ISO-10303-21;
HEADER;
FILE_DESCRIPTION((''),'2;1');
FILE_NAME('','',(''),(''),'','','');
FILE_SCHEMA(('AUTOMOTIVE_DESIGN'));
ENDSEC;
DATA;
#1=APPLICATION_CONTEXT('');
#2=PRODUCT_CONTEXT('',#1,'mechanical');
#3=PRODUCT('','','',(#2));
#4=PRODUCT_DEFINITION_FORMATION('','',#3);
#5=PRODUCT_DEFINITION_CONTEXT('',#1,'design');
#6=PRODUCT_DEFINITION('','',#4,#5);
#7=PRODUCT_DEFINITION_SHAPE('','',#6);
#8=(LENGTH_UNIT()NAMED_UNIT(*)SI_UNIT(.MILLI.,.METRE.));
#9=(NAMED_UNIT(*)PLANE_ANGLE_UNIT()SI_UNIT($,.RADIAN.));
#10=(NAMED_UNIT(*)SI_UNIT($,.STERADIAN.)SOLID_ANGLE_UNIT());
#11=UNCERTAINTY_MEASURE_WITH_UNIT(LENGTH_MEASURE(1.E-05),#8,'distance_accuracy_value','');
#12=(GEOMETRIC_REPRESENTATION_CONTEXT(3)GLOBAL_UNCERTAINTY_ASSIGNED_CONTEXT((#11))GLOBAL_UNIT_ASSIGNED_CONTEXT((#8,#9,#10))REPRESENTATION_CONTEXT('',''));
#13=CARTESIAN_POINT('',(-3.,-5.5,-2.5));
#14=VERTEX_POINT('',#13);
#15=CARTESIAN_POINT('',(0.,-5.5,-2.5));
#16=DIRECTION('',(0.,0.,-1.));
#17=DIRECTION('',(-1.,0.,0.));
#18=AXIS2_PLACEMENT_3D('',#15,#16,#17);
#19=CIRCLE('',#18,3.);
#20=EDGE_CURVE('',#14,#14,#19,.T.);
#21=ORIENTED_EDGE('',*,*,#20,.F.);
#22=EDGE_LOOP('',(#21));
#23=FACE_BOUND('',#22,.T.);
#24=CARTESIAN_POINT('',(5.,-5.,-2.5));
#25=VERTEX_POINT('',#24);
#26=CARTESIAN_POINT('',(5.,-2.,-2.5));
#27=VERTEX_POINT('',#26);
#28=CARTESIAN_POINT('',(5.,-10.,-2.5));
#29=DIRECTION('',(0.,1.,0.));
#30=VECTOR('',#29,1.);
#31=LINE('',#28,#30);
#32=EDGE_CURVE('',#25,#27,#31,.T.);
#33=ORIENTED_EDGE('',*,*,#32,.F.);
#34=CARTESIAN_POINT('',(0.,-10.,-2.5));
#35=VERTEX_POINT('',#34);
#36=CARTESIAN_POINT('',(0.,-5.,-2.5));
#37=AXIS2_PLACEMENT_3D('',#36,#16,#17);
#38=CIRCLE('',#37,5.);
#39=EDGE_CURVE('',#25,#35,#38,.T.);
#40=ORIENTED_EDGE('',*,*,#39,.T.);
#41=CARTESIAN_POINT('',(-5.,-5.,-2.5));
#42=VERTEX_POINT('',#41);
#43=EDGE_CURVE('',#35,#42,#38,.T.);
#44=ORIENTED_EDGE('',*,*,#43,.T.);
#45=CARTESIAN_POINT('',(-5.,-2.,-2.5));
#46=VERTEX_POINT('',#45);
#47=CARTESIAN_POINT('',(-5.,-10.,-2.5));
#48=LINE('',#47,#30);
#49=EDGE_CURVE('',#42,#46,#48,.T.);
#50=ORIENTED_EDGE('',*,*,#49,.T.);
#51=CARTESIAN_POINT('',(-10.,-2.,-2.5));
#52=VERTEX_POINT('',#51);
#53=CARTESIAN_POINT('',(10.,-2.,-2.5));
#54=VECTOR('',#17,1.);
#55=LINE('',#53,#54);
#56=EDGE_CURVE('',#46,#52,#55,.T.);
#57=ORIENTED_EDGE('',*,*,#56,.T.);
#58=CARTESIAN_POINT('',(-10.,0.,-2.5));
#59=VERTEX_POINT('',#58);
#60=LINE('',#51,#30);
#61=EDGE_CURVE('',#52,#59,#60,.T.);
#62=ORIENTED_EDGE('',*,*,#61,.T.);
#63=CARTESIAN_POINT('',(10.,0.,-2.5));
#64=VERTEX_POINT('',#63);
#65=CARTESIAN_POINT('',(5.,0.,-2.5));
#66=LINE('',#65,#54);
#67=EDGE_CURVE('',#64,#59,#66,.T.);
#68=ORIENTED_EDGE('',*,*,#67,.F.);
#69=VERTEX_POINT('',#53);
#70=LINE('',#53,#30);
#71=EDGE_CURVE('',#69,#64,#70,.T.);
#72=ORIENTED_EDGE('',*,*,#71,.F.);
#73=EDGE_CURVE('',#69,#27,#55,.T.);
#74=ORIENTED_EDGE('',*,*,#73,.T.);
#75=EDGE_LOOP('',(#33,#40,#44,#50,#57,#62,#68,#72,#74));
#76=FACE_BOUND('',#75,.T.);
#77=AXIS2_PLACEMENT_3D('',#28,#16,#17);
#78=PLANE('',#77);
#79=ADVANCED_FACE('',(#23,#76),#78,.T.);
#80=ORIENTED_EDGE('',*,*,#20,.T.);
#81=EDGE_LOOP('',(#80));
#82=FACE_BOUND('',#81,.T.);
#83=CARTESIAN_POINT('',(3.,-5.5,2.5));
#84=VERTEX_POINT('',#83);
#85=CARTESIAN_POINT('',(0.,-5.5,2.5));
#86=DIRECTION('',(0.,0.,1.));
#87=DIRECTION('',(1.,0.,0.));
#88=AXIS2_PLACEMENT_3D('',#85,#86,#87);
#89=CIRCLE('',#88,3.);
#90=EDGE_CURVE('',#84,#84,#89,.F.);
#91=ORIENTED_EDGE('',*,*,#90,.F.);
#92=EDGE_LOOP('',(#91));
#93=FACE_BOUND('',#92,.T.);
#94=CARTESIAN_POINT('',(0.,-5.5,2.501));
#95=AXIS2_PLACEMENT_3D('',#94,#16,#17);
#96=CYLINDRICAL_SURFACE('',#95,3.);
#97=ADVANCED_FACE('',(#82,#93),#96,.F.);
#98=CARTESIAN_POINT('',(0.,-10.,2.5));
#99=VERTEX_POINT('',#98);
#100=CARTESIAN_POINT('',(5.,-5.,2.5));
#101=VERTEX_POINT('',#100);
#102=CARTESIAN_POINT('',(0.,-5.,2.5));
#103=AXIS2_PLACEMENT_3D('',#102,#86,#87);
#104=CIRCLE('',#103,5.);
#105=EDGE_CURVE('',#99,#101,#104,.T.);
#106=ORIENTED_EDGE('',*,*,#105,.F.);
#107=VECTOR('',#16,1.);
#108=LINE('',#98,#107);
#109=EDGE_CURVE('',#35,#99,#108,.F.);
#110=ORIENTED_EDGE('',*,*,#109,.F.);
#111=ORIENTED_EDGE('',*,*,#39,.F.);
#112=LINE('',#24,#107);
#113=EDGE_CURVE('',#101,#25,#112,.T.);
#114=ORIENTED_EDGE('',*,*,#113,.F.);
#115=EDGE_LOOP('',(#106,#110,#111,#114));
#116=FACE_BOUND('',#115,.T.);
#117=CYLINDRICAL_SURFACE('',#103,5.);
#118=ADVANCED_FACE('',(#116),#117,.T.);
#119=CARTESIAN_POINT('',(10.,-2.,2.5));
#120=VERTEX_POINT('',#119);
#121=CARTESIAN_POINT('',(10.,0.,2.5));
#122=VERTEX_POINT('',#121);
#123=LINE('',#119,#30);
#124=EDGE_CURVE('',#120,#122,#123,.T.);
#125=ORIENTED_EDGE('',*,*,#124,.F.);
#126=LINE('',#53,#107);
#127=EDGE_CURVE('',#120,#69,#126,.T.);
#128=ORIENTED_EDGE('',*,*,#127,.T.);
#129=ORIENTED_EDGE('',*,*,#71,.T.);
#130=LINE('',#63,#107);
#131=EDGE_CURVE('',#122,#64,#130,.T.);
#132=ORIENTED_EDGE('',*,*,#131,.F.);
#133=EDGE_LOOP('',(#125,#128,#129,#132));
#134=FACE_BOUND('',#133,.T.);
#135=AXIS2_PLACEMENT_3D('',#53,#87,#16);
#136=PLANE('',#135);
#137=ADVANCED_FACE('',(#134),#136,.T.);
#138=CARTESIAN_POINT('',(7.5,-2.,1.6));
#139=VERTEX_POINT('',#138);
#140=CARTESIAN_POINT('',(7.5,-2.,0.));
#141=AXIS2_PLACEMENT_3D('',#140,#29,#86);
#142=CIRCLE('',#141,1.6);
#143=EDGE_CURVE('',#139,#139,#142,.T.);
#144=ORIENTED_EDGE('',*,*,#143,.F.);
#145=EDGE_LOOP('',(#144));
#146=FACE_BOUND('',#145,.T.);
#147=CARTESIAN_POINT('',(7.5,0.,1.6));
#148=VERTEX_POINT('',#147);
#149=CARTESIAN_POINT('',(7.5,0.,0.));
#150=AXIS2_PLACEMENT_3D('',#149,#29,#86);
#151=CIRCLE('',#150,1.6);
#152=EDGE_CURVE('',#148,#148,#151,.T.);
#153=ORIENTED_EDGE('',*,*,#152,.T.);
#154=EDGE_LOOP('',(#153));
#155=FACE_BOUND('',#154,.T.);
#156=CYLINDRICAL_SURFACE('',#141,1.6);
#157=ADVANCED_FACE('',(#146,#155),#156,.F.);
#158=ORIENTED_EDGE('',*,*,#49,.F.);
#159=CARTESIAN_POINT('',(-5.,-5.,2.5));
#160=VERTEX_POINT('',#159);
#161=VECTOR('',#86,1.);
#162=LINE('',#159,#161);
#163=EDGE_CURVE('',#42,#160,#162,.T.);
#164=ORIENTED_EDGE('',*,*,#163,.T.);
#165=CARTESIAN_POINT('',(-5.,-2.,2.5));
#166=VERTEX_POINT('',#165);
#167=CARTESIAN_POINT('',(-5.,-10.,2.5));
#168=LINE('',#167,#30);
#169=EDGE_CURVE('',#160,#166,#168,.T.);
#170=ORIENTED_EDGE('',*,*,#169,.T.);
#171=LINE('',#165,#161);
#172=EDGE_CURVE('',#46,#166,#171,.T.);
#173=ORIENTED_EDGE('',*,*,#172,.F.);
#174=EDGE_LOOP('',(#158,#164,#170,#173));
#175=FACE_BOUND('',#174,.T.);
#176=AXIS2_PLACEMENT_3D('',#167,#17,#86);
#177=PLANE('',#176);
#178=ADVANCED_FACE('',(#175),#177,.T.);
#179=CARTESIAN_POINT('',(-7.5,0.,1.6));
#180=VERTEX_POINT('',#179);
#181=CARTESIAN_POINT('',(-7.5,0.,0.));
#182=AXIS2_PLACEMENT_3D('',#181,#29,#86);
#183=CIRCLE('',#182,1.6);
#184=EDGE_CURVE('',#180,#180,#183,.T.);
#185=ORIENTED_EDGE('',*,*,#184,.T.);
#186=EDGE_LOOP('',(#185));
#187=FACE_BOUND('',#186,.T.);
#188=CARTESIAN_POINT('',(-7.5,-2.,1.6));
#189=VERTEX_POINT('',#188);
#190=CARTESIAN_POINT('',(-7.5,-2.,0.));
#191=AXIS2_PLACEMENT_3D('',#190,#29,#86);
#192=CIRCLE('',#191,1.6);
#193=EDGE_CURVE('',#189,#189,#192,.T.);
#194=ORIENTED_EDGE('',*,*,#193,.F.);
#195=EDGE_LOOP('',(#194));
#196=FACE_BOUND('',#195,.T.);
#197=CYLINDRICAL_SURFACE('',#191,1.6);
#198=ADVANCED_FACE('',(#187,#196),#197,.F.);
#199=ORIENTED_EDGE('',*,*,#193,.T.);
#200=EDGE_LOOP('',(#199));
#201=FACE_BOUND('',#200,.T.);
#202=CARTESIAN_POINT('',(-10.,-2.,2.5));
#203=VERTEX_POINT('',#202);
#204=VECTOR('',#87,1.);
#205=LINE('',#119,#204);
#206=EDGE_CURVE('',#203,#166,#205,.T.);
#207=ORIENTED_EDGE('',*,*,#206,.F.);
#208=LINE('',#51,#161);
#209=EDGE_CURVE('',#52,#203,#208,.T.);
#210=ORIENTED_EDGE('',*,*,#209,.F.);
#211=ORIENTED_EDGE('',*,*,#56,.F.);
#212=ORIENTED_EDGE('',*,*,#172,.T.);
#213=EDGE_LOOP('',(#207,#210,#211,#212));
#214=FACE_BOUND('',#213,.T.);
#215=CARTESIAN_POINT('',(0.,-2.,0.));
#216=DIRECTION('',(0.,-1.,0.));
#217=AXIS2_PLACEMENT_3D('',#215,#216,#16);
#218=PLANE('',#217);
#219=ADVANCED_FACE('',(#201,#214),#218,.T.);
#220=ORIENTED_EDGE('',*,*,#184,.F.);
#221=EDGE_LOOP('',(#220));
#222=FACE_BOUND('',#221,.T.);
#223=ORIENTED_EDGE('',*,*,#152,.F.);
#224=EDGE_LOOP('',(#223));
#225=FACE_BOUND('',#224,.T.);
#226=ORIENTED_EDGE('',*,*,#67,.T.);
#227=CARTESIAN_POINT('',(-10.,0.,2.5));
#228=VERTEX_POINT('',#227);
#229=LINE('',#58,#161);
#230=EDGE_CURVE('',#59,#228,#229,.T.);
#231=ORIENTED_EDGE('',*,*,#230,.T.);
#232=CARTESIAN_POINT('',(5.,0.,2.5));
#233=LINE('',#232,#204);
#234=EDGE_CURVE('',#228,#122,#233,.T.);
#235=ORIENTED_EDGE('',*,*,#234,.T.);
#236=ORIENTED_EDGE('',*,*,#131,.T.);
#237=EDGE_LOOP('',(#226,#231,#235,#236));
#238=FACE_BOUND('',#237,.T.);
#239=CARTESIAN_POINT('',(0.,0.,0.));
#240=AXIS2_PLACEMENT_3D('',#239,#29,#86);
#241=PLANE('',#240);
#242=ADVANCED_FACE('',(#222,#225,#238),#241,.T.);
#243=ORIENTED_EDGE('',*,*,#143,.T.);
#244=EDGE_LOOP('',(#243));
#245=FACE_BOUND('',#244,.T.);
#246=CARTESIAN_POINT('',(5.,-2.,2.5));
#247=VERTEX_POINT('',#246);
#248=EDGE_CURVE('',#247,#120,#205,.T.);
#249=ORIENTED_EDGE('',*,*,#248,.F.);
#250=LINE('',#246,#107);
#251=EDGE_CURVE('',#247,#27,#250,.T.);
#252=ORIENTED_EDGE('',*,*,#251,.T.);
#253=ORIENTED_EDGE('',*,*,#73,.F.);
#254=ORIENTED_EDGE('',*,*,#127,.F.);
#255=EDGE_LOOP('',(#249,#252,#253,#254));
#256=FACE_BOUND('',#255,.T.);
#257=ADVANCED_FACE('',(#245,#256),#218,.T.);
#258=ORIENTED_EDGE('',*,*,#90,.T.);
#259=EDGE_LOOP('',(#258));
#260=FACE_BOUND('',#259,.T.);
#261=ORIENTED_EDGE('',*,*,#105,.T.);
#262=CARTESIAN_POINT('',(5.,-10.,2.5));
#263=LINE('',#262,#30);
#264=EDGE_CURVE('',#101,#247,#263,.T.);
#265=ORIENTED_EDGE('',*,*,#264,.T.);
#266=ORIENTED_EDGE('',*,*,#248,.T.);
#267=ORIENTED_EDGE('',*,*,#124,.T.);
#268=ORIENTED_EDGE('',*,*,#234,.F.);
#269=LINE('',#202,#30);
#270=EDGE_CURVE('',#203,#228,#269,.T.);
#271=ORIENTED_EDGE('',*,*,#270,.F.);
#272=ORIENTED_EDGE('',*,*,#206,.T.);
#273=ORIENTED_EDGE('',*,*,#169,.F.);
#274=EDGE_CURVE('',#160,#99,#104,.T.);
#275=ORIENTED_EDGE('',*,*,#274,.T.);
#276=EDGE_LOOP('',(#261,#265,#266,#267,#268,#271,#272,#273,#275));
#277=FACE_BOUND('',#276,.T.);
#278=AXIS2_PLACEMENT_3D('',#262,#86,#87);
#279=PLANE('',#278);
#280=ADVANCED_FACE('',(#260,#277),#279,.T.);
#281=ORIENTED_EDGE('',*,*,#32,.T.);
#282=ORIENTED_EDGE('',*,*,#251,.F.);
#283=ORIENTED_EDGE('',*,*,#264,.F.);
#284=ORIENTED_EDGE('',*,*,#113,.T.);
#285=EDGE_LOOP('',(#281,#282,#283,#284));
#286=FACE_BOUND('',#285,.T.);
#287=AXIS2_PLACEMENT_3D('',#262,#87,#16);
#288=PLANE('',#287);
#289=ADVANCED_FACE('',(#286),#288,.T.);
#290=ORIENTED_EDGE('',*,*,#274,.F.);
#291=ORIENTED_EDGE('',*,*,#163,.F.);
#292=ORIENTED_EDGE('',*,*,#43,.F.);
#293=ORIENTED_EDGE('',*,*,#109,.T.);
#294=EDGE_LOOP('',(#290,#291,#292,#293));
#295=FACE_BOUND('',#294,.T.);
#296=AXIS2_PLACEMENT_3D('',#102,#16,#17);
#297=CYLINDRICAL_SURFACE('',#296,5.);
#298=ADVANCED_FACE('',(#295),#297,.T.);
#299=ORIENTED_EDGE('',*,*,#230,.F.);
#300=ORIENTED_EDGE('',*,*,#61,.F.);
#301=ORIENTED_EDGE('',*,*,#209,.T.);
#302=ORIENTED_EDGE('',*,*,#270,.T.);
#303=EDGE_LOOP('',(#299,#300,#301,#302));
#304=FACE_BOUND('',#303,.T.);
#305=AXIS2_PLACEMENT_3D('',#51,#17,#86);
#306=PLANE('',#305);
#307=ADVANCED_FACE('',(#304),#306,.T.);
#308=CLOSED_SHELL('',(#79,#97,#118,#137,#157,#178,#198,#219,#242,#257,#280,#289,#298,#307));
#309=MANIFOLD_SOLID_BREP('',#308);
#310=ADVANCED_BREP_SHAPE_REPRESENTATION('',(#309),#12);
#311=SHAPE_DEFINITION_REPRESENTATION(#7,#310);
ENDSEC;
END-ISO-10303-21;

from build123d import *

# Parameters (mm, degrees)
SKETCH1_W           = 10
SKETCH1_H           = 5
BOSS_EXTRUDE1_DEPTH = 10
CUT_EXTRUDE1_REACH  = 14.247
SKETCH2_R           = 3
SKETCH3_W           = 20
SKETCH3_H           = 5
SKETCH3_R           = 1.6
BOSS_EXTRUDE2_DEPTH = 2
FILLET1_R           = 5


with BuildPart() as part:
    # Sketch1 → Boss-Extrude1 (new body)
    with BuildSketch(Plane(origin=(0, 0, 0), x_dir=(1, 0, 0), z_dir=(0, 1, 0))):
        Rectangle(SKETCH1_W, SKETCH1_H)
    extrude(amount=-BOSS_EXTRUDE1_DEPTH)

    # Sketch2 → Cut-Extrude1 (cut, up to next)
    with BuildSketch(Plane(origin=(0, 0, -2.5), x_dir=(-1, 0, 0), z_dir=(0, 0, -1)), mode=Mode.PRIVATE) as cut_extrude1_sk1:
        with Locations((0, -5.5)):
            Circle(SKETCH2_R)
    cut_extrude1_tool1 = extrude(cut_extrude1_sk1.sketch, amount=-CUT_EXTRUDE1_REACH, mode=Mode.PRIVATE) & part.part
    add(cut_extrude1_tool1.solids().sort_by_distance((0, -5.5, -2.5))[0], mode=Mode.SUBTRACT)

    # Sketch3 → Boss-Extrude2 (add)
    with BuildSketch(Plane(origin=(0, 0, 0), x_dir=(1, 0, 0), z_dir=(0, 1, 0))):
        Rectangle(SKETCH3_W, SKETCH3_H)
        with Locations(Location((-7.5, 0, 0), (0, 0, 270))):
            Circle(SKETCH3_R, mode=Mode.SUBTRACT)
        with Locations(Location((7.5, 0, 0), (0, 0, 270))):
            Circle(SKETCH3_R, mode=Mode.SUBTRACT)
    extrude(amount=-BOSS_EXTRUDE2_DEPTH)

    # Fillet1
    fillet1_edges = [part.edges().sort_by_distance(p)[0] for p in [
        (-5, -10, 0),
        (5, -10, 0),
    ]]
    fillet(fillet1_edges, radius=FILLET1_R - 0.0001)  # a hair under: the kernel refuses the full size


solid = part.part
